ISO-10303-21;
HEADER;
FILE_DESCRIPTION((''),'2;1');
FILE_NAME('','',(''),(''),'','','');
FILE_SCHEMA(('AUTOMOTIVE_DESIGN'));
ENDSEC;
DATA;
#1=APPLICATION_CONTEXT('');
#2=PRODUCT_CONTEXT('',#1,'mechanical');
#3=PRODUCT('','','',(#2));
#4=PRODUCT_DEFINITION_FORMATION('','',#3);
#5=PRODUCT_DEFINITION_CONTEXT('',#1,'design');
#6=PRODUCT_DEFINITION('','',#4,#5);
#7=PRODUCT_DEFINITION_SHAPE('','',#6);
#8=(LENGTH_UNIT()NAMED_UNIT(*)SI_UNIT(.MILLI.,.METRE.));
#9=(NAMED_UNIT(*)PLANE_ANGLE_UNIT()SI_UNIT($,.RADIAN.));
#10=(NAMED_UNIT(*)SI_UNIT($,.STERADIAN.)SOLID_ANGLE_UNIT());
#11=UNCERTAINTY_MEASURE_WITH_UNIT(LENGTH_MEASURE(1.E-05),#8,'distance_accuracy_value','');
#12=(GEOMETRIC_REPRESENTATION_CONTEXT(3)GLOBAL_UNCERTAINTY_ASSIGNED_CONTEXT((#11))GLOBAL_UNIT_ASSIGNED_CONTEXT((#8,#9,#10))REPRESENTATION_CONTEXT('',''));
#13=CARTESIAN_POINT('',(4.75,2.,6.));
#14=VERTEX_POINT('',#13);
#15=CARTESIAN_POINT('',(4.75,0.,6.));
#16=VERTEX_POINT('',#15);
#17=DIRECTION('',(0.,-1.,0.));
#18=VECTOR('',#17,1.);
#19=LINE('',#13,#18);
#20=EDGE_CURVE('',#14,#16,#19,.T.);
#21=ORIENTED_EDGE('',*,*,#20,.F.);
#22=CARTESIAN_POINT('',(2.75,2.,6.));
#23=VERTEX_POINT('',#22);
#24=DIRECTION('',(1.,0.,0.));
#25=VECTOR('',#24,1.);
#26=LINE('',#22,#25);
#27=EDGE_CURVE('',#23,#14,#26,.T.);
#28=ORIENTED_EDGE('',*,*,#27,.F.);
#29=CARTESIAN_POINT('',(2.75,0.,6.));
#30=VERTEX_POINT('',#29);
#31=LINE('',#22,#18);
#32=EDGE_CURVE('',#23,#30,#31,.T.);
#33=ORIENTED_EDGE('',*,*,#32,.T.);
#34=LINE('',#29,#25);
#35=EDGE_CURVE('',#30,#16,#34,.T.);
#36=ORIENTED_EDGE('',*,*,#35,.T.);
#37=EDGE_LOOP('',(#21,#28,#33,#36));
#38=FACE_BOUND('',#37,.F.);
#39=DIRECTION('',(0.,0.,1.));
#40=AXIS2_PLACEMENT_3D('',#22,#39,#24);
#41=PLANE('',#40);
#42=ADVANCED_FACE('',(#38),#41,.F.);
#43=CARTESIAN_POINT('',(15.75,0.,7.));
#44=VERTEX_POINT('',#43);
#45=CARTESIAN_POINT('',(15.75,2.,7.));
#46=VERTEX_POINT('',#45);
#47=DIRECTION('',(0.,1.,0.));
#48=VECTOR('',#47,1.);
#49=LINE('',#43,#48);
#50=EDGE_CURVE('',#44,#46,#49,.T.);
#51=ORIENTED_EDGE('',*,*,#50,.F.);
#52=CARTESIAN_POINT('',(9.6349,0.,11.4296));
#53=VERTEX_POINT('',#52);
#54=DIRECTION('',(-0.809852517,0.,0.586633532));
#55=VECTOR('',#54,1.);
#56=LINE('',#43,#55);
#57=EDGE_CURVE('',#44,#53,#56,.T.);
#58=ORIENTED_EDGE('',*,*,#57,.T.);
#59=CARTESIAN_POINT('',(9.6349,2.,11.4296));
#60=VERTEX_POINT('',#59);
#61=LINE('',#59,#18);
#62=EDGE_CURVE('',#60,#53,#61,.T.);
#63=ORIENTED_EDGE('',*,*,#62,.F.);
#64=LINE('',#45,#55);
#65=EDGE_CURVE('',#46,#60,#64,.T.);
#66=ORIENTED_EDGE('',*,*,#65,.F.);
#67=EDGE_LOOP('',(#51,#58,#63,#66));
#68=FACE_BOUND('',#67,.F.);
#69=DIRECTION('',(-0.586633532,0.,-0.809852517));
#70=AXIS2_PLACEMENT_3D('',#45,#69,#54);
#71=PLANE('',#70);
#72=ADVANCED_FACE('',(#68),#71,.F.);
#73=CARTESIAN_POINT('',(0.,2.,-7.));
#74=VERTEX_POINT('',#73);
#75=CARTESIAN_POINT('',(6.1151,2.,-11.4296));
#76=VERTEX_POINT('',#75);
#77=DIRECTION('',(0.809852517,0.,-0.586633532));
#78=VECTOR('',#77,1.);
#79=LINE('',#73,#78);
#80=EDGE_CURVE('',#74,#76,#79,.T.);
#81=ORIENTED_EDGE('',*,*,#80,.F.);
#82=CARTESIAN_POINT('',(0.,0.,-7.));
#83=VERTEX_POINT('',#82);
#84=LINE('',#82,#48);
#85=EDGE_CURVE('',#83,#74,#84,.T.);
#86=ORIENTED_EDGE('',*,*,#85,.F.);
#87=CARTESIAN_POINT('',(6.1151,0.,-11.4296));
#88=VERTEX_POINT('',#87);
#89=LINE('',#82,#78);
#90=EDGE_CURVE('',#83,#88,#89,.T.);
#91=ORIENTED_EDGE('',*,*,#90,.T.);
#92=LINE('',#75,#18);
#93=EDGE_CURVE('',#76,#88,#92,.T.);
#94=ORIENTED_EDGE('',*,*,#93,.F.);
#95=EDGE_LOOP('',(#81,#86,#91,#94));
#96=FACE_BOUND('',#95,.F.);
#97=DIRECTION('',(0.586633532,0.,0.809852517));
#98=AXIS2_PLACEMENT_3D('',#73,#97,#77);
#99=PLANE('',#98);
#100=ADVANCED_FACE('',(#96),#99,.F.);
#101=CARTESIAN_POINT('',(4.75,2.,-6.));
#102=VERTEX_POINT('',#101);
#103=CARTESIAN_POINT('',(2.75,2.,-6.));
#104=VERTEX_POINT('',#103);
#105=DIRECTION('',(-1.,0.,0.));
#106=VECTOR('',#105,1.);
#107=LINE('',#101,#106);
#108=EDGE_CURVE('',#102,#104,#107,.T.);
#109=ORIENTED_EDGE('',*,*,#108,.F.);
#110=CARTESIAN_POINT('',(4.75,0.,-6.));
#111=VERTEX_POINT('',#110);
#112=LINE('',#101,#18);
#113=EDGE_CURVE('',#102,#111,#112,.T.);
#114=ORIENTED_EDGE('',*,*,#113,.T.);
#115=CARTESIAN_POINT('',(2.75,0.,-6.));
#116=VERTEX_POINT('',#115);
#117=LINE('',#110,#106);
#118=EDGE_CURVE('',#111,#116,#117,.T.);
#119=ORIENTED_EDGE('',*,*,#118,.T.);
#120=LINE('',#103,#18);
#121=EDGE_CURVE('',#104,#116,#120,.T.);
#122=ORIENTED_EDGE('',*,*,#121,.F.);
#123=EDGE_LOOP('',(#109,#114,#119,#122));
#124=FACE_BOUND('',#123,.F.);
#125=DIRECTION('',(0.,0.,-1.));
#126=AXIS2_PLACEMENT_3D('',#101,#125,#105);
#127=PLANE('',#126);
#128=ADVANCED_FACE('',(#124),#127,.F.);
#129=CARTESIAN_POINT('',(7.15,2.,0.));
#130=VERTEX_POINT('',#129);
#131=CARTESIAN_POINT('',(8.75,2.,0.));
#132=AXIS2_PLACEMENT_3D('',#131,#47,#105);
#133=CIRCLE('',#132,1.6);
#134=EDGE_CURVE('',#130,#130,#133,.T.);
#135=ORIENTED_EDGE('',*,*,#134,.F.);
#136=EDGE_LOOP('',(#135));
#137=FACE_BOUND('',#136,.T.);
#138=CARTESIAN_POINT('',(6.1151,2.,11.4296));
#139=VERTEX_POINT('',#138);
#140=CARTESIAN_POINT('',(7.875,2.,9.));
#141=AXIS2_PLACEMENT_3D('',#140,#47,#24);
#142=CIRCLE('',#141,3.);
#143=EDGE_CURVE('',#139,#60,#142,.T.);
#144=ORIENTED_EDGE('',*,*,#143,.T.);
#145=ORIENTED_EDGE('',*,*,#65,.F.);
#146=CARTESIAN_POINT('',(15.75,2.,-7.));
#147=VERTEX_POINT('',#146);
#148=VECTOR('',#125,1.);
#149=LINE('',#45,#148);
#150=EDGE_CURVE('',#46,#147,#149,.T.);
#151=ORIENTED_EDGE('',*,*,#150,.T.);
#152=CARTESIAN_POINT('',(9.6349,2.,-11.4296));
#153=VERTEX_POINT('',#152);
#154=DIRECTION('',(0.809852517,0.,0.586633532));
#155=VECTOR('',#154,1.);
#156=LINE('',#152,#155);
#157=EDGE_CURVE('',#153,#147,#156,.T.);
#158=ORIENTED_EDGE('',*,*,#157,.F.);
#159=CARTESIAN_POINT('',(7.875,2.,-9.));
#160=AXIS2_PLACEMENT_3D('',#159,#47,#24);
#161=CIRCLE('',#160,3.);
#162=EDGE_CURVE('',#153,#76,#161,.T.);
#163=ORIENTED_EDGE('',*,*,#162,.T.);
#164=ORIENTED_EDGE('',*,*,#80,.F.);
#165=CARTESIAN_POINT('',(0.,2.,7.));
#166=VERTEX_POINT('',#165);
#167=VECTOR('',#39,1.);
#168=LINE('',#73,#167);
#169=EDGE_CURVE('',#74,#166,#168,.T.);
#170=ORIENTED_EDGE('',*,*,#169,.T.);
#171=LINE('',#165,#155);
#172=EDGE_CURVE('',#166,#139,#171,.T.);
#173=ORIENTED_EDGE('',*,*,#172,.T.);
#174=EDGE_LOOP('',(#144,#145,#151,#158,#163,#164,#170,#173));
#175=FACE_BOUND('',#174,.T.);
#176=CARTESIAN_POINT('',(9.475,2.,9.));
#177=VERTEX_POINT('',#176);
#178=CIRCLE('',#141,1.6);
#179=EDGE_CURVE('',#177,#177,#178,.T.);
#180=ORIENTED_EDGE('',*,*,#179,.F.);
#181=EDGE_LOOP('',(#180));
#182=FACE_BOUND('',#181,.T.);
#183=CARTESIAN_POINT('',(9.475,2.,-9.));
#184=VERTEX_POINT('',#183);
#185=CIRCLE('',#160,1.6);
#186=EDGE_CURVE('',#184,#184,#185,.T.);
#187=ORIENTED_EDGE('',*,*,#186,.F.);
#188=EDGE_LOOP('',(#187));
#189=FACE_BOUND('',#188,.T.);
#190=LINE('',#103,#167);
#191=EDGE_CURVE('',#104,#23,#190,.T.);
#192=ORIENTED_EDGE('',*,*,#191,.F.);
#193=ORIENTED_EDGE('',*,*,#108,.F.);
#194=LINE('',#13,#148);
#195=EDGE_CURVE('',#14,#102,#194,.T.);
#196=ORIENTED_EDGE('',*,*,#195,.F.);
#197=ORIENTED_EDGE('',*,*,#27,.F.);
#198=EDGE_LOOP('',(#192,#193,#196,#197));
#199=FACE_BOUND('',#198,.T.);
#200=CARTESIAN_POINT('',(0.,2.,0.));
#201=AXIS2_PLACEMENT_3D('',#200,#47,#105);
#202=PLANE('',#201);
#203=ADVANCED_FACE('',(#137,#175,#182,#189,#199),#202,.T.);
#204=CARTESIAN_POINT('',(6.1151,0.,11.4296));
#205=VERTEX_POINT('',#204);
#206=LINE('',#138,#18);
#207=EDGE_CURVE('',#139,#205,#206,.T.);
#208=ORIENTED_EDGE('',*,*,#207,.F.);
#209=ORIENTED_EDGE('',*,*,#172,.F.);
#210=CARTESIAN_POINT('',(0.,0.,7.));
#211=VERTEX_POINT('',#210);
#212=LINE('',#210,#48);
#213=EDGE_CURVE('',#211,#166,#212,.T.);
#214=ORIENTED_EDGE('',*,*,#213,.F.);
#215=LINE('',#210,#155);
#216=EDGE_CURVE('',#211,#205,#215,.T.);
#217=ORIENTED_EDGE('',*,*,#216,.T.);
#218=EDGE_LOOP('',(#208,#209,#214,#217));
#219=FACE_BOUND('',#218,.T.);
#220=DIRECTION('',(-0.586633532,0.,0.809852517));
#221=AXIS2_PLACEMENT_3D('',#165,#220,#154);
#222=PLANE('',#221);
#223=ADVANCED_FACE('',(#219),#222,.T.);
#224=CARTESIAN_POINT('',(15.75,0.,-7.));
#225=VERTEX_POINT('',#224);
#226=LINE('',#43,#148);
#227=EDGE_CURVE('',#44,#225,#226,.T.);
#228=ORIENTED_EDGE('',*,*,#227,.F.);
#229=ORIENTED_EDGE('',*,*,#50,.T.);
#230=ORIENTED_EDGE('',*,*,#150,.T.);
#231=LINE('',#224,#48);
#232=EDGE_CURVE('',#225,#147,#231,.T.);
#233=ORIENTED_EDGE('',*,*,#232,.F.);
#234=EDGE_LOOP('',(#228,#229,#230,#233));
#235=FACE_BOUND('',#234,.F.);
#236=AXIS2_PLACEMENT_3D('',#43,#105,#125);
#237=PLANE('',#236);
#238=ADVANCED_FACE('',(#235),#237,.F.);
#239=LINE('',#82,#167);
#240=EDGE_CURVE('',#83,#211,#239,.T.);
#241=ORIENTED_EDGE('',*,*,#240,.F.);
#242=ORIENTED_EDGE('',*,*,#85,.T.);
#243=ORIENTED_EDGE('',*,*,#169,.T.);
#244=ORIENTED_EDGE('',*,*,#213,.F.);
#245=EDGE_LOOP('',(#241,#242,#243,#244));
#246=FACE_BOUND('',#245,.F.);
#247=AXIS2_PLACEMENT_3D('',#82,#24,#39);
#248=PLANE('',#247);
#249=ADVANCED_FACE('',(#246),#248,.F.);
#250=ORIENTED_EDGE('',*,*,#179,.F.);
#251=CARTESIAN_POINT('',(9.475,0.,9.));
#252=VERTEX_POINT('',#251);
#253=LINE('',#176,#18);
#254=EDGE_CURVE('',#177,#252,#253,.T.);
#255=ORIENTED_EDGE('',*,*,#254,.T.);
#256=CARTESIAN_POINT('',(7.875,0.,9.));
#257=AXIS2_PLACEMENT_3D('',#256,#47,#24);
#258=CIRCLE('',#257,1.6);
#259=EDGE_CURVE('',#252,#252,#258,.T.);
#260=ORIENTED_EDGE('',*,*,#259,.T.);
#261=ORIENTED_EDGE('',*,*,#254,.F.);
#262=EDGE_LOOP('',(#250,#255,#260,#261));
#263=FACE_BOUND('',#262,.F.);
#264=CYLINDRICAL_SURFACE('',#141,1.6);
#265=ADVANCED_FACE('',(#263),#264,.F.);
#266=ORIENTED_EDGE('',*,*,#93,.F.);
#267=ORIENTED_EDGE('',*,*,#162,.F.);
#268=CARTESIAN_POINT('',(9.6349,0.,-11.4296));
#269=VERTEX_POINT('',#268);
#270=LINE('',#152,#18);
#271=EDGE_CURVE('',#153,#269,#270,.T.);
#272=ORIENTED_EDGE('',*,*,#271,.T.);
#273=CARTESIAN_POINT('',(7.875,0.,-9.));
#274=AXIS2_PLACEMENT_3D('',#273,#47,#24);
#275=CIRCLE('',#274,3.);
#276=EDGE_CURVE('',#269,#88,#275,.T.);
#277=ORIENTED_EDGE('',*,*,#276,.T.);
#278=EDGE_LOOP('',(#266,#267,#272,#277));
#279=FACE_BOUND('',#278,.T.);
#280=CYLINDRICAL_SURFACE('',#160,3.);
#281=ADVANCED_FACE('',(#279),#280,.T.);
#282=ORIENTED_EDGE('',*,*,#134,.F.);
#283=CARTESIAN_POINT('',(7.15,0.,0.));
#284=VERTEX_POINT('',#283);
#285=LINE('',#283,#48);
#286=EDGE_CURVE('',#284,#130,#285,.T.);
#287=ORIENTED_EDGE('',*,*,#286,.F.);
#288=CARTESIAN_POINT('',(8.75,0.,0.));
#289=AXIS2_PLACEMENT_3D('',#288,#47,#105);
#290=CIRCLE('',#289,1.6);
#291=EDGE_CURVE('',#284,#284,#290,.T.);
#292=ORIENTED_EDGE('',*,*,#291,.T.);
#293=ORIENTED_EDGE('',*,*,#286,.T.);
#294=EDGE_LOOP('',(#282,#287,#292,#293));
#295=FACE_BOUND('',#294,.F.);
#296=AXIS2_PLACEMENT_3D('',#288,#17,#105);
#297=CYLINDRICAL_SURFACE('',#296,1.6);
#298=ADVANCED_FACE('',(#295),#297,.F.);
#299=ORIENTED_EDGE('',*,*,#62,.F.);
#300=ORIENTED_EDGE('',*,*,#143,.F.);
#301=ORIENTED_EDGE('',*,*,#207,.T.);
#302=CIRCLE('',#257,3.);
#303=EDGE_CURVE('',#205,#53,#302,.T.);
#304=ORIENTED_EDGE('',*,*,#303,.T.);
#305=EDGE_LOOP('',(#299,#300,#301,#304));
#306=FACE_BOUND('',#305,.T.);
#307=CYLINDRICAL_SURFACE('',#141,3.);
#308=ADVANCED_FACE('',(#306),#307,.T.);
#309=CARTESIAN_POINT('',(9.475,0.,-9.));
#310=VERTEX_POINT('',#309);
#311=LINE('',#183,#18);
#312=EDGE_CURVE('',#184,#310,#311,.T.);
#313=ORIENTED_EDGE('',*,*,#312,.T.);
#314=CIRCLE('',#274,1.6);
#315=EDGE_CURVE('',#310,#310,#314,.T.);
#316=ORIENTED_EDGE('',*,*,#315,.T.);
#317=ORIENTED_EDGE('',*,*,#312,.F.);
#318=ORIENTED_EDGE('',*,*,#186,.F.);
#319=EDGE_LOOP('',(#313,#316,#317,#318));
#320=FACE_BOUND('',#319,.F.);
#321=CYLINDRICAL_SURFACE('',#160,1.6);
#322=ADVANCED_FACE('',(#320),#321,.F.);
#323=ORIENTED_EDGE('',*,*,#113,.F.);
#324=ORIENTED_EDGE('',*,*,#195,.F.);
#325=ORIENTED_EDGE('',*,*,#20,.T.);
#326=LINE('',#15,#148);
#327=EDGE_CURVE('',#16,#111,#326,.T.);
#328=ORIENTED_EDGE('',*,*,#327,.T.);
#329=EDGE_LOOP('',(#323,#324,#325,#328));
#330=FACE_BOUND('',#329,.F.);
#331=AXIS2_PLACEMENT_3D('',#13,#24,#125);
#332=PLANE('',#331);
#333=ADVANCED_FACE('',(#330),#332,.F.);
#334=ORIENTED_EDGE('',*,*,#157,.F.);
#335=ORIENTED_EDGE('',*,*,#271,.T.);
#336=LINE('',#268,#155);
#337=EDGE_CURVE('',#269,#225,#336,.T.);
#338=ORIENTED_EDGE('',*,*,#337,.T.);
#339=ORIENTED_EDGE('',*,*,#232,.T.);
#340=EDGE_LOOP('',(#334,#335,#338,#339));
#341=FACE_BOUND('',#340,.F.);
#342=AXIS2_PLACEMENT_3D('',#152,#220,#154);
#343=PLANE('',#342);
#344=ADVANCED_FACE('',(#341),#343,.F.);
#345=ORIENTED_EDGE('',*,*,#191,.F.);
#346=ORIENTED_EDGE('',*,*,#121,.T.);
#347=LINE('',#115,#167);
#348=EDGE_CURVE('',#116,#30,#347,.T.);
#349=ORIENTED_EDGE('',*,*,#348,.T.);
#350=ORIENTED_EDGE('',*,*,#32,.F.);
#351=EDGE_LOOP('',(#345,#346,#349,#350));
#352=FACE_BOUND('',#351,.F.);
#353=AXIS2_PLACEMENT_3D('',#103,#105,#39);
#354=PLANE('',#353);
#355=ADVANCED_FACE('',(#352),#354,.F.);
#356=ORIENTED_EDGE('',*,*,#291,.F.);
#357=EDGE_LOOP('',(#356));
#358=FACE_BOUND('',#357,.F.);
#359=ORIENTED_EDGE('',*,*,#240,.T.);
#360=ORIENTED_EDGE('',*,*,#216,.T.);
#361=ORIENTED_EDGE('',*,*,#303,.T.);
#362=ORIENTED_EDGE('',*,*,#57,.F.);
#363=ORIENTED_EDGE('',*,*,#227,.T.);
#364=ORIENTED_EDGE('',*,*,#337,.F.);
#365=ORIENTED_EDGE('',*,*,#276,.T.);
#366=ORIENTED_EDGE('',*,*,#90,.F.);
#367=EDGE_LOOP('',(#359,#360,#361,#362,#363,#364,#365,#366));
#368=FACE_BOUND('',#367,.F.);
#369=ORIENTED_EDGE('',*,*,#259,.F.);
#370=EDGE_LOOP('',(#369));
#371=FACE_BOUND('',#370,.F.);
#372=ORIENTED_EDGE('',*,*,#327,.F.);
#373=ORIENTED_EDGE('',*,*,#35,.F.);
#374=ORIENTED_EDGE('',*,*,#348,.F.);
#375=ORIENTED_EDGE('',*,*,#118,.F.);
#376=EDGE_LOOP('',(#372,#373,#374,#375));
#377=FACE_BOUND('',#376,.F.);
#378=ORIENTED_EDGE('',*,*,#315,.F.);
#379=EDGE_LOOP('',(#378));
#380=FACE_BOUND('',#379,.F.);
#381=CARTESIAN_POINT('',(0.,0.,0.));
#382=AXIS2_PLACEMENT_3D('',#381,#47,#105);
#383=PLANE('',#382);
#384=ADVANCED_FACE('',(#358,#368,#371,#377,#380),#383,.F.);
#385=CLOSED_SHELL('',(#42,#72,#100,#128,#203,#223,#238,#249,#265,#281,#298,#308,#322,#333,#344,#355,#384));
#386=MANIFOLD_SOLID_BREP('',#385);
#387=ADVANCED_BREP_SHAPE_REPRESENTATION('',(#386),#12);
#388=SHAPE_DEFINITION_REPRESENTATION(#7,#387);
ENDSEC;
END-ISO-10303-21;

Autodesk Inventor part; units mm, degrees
ref_plane "YZ Plane" through (0, 0, 0) normal (1, 0, 0) x (0, 1, 0)
ref_plane "XZ Plane" through (0, 0, 0) normal (0, 1, 0) x (-1, 0, 0)
ref_plane "XY Plane" through (0, 0, 0) normal (0, 0, 1) x (1, 0, 0)
sketch "Эскиз1" plane through (0, 0, 0) normal (0, 1, 0) x (-1, 0, 0)
  line L0 (-15.75, 7) -> (15.75, 7) construction
  line L1 (15.75, 7) -> (15.75, -7) construction
  line L2 (15.75, -7) -> (-15.75, -7) construction
  line L3 (-15.75, -7) -> (-15.75, 7) construction
  line L4 (-15.75, 7) -> (15.75, -7) construction
  line L5 (15.75, 7) -> (-15.75, -7) construction
  line L6 (0, 7) -> (-15.75, 7)
  line L7 (-15.75, 7) -> (-15.75, -7)
  line L8 (-15.75, -7) -> (0, -7)
  line L9 (0, -7) -> (0, 7)
  circle A0 centre (-8.75, 0) radius 1.6
  point P0 (0, 0)
  dimension "d0" = 31.5
  dimension "d1" = 14
  dimension "d2" = 3.2
  dimension "d3" = 7
extrude "Выдавливание1" add sketch "Эскиз1" along normal blind 2
sketch "Эскиз2" plane through (0, 2, 0) normal (0, 1, 0) x (1, 0, 0)
  circle A0 centre (8.75, 0) radius 1.6 projected
  circle A1 centre (7.875, 9) radius 1.6
  circle A2 centre (7.875, -9) radius 1.6
  line L0 (0, -7) -> (15.75, -7) projected
  line L1 (15.75, 7) -> (0, 7) projected
  circle A3 centre (7.875, -9) radius 3
  circle A4 centre (7.875, 9) radius 3
  line L2 (0, 7) -> (6.1151, 11.4296)
  line L3 (9.6349, 11.4296) -> (15.75, 7)
  line L4 (15.75, -7) -> (15.75, 7) projected
  line L5 (0, 7) -> (0, -7) projected
  line L6 (0, -7) -> (6.1151, -11.4296)
  line L7 (15.75, -7) -> (9.6349, -11.4296)
  line L8 (7.875, 9) -> (7.875, -16.4074) construction
  point P0 (0, 0)
  point P1 (5.8526, -11.2158)
  point P2 (8.7863, -11.8582)
  point P3 (10.1111, -7)
  point P4 (5.6389, -7)
  dimension "d6" = 3.2
  dimension "d7" = 3.2
  dimension "d9" = 2
  dimension "d10" = 6
  dimension "d11" = 6
  dimension "d14" = 2
extrude "Выдавливание2" add sketch "Эскиз2" against normal blind 2 contours L0 A3 L6 | A3 L0 | L0 A3 | L2 A4 L1 | L0 L7 A3 | A4 L1 | A4 L3 L1 picked at (7.8107, 7.1372)
sketch "Эскиз3" plane through (0, 2, 0) normal (0, 1, 0) x (1, 0, 0)
  line L0 (2.75, -6) -> (4.75, -6)
  line L1 (4.75, -6) -> (4.75, 6)
  line L2 (4.75, 6) -> (2.75, 6)
  line L3 (2.75, 6) -> (2.75, -6)
  line L4 (2.75, -6) -> (4.75, 6) construction
  line L5 (4.75, -6) -> (2.75, 6) construction
  circle A0 centre (8.75, 0) radius 1.6 projected
  point P0 (0, 0)
  point P1 (3.75, 0)
  dimension "d15" = 2
  dimension "d16" = 12
  dimension "d17" = 5
extrude "Выдавливание4" cut sketch "Эскиз3" against normal blind 2 contours L3 L2 L1 L0
properties part number "креп_отп_каретка"
